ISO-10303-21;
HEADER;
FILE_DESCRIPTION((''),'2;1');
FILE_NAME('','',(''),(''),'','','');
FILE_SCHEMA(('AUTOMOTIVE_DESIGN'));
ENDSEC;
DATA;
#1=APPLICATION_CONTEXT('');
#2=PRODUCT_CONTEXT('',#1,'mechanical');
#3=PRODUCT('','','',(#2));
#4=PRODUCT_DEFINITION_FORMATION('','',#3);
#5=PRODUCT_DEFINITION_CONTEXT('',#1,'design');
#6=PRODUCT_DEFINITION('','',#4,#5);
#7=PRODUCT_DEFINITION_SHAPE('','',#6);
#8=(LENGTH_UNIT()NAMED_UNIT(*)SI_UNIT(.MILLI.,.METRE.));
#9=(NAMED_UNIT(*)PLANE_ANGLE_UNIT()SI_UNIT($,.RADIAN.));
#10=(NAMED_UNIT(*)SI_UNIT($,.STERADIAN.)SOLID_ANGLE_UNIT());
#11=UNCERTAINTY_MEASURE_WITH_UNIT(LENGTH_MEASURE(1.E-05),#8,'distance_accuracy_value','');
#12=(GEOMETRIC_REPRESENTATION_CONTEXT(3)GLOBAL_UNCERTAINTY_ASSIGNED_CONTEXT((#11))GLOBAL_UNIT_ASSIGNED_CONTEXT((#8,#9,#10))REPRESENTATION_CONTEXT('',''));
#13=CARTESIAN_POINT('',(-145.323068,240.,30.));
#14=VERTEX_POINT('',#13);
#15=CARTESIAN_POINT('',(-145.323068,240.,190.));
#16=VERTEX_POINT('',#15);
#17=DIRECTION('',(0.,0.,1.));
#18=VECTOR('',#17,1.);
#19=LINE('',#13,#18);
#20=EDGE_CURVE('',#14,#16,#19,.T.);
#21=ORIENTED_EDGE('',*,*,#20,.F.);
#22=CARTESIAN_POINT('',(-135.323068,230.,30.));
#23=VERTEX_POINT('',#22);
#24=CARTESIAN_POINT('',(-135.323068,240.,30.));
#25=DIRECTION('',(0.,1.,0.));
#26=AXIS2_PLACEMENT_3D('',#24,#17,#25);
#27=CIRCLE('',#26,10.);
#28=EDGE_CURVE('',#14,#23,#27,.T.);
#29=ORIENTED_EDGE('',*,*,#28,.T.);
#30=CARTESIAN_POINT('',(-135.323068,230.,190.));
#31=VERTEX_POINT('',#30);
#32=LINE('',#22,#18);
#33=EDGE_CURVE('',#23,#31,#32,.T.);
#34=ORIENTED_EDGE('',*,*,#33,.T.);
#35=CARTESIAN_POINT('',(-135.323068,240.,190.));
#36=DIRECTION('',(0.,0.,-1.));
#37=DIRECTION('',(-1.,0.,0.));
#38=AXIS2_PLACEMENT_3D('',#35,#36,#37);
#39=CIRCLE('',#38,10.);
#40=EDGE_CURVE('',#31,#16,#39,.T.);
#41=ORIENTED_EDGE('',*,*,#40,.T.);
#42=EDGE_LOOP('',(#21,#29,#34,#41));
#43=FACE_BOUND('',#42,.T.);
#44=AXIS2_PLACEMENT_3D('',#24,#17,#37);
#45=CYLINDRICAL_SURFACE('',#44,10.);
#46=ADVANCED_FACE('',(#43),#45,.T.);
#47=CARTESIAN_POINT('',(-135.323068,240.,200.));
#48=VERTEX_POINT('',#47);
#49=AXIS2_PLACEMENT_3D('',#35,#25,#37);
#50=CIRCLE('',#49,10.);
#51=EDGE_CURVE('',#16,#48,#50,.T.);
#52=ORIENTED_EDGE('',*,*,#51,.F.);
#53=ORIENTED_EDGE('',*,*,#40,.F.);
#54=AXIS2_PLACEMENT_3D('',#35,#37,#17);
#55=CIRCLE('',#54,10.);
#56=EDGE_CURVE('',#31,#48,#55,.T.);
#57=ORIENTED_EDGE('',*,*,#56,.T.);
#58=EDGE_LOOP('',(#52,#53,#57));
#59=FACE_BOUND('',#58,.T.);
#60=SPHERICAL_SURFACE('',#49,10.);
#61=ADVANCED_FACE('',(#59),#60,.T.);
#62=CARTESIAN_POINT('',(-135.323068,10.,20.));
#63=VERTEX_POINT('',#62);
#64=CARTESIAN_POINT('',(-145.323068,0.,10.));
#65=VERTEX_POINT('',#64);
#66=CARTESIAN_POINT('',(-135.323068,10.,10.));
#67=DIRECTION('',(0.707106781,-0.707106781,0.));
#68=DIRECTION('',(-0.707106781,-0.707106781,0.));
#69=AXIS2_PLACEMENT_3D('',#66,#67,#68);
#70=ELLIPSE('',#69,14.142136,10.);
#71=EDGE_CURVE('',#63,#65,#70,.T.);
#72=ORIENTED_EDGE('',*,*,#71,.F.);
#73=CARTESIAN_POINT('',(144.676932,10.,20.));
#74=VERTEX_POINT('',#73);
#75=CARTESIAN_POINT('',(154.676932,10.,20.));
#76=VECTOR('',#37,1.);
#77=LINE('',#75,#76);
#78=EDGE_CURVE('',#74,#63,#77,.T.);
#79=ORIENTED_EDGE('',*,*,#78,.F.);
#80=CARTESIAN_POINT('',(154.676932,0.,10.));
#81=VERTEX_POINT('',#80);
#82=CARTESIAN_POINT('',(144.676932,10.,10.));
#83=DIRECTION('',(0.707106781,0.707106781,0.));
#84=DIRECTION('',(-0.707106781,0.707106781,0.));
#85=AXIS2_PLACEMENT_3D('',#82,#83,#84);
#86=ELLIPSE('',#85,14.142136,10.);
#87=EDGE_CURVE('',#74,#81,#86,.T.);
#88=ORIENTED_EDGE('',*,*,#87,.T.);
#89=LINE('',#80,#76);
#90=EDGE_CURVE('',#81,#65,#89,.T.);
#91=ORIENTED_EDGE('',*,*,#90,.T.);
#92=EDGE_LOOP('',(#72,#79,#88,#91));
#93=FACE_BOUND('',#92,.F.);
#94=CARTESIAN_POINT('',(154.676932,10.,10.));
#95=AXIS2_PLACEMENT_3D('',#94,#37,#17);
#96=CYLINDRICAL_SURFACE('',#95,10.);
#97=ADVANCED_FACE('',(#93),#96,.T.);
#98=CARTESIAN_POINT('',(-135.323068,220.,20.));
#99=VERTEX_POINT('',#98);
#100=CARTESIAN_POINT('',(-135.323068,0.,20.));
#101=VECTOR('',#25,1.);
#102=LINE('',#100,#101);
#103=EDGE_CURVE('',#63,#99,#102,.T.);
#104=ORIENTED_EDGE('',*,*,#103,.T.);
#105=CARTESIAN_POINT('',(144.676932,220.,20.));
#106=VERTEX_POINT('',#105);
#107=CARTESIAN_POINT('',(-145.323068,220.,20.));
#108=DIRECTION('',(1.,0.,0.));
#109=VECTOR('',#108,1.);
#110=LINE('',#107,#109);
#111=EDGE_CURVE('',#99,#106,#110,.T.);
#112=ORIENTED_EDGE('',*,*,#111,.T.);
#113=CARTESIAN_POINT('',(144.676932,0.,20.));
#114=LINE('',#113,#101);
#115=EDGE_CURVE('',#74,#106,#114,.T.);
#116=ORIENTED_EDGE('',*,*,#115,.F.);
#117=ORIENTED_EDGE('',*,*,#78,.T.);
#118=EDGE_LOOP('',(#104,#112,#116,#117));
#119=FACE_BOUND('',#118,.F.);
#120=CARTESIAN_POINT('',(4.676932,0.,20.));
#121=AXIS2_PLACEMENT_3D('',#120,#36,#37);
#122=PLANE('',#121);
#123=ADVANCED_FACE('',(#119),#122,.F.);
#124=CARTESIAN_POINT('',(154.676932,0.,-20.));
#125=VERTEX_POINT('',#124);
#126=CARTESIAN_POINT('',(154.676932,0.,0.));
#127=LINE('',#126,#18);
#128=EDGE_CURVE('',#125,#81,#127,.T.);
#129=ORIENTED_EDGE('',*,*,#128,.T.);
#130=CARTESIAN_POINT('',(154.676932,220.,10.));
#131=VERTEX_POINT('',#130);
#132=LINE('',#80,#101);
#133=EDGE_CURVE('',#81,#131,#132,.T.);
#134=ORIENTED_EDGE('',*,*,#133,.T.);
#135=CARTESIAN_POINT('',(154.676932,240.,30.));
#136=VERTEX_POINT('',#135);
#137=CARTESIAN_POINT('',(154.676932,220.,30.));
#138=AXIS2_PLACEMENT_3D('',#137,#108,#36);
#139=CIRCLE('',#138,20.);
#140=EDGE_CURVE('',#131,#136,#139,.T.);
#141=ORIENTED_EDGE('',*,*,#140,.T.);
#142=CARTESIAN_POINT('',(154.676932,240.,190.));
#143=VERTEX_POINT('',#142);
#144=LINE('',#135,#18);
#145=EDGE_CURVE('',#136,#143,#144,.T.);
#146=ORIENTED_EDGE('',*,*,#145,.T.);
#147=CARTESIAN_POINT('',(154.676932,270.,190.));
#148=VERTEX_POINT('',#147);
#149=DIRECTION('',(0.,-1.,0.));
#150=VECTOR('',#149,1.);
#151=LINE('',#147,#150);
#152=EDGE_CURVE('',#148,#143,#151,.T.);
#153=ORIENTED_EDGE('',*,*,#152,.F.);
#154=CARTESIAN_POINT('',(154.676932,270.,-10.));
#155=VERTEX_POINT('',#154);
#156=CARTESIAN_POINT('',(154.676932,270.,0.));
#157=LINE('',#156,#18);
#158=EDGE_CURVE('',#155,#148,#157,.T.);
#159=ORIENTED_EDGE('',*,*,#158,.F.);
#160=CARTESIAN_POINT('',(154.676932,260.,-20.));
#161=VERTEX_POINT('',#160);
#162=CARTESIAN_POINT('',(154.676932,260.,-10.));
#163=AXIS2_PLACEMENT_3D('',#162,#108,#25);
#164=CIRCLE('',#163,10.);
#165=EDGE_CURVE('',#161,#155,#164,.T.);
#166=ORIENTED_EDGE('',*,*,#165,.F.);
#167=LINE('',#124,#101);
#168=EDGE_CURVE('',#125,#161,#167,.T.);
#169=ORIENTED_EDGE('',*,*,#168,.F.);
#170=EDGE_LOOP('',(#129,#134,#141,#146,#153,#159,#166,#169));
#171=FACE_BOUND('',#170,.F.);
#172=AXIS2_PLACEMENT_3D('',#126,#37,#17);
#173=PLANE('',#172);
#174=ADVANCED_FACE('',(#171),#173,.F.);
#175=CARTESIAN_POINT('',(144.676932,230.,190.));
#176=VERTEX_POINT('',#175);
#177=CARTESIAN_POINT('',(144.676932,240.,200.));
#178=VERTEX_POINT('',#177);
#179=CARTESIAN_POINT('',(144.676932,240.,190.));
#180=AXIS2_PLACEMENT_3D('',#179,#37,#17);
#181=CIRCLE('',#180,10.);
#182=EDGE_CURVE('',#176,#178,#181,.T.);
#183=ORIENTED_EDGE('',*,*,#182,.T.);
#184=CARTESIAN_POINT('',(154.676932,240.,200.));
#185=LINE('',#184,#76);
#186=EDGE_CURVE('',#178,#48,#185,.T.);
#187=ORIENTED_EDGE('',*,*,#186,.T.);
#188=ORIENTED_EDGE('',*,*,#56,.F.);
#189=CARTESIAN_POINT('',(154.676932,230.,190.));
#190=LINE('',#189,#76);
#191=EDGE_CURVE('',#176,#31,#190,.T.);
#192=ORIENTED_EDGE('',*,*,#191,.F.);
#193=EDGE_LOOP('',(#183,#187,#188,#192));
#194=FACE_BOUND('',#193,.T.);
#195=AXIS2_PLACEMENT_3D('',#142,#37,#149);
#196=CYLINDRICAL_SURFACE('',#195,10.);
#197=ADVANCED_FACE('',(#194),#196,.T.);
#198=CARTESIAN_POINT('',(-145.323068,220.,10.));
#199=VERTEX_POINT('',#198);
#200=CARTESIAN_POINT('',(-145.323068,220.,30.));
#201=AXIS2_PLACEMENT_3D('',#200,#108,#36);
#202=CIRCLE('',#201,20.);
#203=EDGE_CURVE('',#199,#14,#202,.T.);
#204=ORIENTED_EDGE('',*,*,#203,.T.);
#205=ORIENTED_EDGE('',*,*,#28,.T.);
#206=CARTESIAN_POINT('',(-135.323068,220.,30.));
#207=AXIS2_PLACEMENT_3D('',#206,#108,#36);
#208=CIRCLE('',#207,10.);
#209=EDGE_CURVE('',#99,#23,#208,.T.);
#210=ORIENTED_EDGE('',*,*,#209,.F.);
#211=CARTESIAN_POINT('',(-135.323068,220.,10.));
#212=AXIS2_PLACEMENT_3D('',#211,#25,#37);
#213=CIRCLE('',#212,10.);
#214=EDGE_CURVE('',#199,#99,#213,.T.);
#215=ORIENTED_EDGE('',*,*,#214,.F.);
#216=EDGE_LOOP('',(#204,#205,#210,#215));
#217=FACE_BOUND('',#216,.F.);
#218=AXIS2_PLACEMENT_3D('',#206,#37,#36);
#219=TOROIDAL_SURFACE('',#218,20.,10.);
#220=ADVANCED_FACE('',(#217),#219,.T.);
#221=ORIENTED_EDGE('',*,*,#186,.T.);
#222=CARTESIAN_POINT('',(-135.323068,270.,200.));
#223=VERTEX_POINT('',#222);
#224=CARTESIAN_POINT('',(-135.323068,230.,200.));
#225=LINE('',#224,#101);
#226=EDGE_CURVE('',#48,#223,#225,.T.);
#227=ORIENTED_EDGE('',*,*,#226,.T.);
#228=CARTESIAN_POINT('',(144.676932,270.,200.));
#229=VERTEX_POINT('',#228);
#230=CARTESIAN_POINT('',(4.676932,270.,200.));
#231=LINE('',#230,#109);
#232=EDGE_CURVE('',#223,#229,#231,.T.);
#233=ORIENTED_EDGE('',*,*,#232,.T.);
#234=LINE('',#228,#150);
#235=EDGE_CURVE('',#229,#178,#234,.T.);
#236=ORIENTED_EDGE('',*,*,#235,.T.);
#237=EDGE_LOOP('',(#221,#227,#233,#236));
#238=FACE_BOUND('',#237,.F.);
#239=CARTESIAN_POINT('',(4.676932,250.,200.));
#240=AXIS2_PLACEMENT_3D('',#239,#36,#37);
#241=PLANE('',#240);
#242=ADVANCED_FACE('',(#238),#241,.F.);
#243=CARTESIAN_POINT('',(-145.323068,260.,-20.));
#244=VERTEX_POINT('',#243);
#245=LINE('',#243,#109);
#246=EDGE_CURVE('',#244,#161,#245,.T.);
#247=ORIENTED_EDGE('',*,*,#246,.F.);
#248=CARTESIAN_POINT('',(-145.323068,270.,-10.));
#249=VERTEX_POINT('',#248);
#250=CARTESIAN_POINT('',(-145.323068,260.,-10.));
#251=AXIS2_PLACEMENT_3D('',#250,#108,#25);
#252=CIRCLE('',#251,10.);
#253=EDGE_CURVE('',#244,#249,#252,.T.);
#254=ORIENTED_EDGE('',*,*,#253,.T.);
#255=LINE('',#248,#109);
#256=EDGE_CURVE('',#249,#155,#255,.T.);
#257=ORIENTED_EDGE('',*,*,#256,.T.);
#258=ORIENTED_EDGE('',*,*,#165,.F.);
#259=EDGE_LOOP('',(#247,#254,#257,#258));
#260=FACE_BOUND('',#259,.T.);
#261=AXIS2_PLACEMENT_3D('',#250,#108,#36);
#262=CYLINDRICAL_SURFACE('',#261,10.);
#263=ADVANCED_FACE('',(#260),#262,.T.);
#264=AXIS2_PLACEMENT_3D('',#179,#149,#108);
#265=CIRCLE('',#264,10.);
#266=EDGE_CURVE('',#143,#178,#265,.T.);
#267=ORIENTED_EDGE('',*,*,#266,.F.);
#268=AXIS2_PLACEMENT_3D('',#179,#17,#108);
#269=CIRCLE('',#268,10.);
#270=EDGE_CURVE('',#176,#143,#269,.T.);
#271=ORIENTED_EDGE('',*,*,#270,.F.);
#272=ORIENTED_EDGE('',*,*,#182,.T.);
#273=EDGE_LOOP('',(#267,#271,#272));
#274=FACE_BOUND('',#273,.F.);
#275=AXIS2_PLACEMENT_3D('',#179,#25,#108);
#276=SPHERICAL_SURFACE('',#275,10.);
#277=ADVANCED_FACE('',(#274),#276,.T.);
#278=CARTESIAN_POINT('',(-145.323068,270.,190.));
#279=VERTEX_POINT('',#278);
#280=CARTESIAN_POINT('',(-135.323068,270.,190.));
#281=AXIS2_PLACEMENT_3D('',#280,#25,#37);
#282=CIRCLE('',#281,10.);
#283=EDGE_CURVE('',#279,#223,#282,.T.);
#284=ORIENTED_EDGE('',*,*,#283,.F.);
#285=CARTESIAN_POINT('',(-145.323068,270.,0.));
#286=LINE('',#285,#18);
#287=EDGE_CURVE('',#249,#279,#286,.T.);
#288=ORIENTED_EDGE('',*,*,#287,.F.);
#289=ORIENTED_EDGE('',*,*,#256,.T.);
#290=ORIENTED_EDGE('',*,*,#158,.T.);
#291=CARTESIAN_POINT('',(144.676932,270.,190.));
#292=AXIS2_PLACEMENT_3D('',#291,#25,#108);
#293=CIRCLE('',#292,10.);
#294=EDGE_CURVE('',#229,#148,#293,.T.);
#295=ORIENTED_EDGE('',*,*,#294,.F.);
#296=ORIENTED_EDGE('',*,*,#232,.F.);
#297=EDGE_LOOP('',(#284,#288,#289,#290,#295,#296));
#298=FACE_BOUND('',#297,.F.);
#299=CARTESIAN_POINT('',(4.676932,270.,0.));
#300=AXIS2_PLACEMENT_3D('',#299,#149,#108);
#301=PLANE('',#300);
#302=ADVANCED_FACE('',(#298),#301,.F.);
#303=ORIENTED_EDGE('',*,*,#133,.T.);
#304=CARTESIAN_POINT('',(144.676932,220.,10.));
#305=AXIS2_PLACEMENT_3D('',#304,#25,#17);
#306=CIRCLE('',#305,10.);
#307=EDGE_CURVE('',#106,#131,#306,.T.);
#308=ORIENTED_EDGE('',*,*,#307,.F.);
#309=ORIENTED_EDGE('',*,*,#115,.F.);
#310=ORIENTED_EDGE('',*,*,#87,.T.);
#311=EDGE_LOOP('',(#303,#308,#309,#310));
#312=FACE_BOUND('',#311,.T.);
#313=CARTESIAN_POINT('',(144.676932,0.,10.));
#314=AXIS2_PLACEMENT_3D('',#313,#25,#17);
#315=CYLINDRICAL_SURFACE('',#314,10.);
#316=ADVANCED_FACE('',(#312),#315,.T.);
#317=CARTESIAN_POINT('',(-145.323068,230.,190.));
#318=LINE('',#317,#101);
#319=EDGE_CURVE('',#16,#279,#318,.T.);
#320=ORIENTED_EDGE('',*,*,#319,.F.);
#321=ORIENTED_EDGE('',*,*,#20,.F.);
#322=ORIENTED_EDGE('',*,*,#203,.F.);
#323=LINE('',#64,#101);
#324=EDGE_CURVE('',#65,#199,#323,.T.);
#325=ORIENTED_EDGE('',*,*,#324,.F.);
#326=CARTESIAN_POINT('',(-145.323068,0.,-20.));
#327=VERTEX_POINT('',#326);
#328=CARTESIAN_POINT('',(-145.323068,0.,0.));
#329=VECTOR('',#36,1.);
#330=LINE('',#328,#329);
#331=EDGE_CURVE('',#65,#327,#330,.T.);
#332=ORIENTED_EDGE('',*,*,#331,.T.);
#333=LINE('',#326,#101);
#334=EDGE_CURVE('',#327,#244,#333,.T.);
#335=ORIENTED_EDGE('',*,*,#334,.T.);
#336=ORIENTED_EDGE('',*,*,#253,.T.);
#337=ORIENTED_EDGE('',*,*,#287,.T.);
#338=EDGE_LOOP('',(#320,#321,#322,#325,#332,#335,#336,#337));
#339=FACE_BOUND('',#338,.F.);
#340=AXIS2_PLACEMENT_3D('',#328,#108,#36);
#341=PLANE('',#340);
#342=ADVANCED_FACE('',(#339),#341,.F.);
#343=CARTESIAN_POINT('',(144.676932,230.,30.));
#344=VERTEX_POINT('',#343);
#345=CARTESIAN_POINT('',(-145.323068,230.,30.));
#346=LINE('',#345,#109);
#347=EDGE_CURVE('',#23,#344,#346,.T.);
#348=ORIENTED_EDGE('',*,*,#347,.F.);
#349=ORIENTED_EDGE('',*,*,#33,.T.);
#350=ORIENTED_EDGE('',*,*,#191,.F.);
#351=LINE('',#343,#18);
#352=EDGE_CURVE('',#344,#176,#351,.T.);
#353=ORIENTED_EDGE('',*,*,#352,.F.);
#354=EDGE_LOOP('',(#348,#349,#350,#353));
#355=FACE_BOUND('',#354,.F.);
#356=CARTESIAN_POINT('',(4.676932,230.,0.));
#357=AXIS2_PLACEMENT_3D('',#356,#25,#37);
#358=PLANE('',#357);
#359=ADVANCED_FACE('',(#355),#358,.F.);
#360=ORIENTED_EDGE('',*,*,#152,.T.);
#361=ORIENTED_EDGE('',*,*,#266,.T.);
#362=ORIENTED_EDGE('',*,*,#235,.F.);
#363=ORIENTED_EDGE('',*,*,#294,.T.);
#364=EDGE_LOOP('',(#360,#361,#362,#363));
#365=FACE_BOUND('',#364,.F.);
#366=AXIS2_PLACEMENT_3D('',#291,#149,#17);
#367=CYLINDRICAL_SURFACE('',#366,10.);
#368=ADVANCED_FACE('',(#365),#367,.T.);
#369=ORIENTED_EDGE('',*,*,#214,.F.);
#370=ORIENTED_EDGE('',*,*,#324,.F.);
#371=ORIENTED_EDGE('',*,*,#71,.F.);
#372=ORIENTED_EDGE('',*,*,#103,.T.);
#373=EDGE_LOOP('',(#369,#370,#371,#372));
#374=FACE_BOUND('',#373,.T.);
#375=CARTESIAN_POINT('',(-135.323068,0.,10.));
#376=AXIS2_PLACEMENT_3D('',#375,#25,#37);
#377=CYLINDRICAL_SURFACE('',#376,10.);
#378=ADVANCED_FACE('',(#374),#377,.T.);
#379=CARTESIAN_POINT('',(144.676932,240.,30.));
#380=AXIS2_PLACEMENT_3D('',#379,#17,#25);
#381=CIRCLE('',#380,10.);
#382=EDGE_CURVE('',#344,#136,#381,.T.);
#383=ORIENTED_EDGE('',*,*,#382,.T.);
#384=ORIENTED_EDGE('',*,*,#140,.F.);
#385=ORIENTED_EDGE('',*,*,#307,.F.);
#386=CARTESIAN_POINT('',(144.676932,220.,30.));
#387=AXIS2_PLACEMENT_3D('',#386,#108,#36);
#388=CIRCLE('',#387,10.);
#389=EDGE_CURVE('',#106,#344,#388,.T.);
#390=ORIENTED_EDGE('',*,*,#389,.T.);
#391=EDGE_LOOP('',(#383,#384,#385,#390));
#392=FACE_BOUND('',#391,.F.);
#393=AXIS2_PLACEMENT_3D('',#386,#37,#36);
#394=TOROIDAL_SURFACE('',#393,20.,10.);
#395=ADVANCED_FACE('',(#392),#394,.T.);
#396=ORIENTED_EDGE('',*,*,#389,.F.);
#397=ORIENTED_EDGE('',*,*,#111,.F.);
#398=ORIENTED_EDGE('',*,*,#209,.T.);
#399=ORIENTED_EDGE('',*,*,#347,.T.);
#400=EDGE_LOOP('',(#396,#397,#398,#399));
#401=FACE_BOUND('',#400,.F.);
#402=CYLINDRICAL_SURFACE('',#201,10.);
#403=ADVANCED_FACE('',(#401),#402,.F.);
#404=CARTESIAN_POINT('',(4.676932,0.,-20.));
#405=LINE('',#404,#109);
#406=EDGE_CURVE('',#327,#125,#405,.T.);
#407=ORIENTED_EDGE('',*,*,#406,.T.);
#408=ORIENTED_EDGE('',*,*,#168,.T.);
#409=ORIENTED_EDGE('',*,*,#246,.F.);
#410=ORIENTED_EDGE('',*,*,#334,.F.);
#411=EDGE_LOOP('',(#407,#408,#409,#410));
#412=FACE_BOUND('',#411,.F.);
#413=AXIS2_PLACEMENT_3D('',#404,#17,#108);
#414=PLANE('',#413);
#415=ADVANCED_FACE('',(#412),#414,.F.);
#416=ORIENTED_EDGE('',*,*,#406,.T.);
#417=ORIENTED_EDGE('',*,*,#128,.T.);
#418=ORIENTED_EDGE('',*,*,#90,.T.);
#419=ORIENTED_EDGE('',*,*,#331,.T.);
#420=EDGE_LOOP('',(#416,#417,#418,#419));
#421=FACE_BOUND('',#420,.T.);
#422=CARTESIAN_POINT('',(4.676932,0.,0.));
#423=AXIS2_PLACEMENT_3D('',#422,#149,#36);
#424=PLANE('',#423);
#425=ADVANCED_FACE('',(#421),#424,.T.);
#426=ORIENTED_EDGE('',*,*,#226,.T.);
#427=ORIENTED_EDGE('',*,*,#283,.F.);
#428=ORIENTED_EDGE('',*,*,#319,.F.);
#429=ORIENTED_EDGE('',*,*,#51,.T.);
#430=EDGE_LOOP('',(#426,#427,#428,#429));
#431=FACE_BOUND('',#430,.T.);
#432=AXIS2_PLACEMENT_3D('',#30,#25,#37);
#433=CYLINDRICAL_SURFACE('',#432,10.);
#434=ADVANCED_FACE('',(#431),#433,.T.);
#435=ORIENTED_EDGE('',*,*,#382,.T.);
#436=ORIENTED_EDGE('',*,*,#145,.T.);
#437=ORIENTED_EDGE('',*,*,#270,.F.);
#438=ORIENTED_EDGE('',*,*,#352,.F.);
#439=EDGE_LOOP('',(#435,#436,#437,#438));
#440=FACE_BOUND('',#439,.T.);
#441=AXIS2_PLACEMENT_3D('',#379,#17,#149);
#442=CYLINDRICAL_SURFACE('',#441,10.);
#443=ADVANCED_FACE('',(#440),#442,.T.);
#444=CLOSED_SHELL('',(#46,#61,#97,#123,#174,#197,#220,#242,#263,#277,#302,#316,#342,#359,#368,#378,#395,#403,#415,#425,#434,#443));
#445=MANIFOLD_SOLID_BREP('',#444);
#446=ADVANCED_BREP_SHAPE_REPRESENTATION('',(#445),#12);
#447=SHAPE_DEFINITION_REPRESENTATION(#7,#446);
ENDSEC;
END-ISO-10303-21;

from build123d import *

# Parameters (mm, degrees)
F0_W    = 300
F0_H    = 40
F3_F1_R = 10
F3_F2_R = 10


with BuildPart() as f2:
    # F2: sweep along a path in F1
    with BuildLine(Plane.YZ) as f2_path:
        Line((0, 0), (250, 0))
        Line((250, 0), (250, 200))
    # F0 (on Front) → F2 (sweep)
    with BuildSketch(Plane.XZ):
        with Locations((4.6769320033, 0)):
            Rectangle(F0_W, F0_H)
    sweep(path=f2_path.line, transition=Transition.RIGHT)

    # F3: fillet of radius 10 on 8 edges, made by hand

    # F3_f1
    f3_f1_edges = [f2.edges().sort_by_distance(p)[0] for p in [
        (4.6769320033, 230, 20),
    ]]
    fillet(f3_f1_edges, radius=F3_F1_R)

    # F3_f2
    f3_f2_edges = [f2.edges().sort_by_distance(p)[0] for p in [
        (154.6769320033, 250, 200),
        (-145.3230679967, 250, 200),
        (154.6769320033, 110, 20),
        (4.6769320033, 0, 20),
        (-145.3230679967, 110, 20),
        (4.6769320033, 270, -20),
        (4.6769320033, 230, 200),
        (-145.3230679967, 227.0710678119, 22.9289321881),
        (154.6769320033, 227.0710678119, 22.9289321881),
    ]]
    fillet(f3_f2_edges, radius=F3_F2_R)


solid = f2.part
